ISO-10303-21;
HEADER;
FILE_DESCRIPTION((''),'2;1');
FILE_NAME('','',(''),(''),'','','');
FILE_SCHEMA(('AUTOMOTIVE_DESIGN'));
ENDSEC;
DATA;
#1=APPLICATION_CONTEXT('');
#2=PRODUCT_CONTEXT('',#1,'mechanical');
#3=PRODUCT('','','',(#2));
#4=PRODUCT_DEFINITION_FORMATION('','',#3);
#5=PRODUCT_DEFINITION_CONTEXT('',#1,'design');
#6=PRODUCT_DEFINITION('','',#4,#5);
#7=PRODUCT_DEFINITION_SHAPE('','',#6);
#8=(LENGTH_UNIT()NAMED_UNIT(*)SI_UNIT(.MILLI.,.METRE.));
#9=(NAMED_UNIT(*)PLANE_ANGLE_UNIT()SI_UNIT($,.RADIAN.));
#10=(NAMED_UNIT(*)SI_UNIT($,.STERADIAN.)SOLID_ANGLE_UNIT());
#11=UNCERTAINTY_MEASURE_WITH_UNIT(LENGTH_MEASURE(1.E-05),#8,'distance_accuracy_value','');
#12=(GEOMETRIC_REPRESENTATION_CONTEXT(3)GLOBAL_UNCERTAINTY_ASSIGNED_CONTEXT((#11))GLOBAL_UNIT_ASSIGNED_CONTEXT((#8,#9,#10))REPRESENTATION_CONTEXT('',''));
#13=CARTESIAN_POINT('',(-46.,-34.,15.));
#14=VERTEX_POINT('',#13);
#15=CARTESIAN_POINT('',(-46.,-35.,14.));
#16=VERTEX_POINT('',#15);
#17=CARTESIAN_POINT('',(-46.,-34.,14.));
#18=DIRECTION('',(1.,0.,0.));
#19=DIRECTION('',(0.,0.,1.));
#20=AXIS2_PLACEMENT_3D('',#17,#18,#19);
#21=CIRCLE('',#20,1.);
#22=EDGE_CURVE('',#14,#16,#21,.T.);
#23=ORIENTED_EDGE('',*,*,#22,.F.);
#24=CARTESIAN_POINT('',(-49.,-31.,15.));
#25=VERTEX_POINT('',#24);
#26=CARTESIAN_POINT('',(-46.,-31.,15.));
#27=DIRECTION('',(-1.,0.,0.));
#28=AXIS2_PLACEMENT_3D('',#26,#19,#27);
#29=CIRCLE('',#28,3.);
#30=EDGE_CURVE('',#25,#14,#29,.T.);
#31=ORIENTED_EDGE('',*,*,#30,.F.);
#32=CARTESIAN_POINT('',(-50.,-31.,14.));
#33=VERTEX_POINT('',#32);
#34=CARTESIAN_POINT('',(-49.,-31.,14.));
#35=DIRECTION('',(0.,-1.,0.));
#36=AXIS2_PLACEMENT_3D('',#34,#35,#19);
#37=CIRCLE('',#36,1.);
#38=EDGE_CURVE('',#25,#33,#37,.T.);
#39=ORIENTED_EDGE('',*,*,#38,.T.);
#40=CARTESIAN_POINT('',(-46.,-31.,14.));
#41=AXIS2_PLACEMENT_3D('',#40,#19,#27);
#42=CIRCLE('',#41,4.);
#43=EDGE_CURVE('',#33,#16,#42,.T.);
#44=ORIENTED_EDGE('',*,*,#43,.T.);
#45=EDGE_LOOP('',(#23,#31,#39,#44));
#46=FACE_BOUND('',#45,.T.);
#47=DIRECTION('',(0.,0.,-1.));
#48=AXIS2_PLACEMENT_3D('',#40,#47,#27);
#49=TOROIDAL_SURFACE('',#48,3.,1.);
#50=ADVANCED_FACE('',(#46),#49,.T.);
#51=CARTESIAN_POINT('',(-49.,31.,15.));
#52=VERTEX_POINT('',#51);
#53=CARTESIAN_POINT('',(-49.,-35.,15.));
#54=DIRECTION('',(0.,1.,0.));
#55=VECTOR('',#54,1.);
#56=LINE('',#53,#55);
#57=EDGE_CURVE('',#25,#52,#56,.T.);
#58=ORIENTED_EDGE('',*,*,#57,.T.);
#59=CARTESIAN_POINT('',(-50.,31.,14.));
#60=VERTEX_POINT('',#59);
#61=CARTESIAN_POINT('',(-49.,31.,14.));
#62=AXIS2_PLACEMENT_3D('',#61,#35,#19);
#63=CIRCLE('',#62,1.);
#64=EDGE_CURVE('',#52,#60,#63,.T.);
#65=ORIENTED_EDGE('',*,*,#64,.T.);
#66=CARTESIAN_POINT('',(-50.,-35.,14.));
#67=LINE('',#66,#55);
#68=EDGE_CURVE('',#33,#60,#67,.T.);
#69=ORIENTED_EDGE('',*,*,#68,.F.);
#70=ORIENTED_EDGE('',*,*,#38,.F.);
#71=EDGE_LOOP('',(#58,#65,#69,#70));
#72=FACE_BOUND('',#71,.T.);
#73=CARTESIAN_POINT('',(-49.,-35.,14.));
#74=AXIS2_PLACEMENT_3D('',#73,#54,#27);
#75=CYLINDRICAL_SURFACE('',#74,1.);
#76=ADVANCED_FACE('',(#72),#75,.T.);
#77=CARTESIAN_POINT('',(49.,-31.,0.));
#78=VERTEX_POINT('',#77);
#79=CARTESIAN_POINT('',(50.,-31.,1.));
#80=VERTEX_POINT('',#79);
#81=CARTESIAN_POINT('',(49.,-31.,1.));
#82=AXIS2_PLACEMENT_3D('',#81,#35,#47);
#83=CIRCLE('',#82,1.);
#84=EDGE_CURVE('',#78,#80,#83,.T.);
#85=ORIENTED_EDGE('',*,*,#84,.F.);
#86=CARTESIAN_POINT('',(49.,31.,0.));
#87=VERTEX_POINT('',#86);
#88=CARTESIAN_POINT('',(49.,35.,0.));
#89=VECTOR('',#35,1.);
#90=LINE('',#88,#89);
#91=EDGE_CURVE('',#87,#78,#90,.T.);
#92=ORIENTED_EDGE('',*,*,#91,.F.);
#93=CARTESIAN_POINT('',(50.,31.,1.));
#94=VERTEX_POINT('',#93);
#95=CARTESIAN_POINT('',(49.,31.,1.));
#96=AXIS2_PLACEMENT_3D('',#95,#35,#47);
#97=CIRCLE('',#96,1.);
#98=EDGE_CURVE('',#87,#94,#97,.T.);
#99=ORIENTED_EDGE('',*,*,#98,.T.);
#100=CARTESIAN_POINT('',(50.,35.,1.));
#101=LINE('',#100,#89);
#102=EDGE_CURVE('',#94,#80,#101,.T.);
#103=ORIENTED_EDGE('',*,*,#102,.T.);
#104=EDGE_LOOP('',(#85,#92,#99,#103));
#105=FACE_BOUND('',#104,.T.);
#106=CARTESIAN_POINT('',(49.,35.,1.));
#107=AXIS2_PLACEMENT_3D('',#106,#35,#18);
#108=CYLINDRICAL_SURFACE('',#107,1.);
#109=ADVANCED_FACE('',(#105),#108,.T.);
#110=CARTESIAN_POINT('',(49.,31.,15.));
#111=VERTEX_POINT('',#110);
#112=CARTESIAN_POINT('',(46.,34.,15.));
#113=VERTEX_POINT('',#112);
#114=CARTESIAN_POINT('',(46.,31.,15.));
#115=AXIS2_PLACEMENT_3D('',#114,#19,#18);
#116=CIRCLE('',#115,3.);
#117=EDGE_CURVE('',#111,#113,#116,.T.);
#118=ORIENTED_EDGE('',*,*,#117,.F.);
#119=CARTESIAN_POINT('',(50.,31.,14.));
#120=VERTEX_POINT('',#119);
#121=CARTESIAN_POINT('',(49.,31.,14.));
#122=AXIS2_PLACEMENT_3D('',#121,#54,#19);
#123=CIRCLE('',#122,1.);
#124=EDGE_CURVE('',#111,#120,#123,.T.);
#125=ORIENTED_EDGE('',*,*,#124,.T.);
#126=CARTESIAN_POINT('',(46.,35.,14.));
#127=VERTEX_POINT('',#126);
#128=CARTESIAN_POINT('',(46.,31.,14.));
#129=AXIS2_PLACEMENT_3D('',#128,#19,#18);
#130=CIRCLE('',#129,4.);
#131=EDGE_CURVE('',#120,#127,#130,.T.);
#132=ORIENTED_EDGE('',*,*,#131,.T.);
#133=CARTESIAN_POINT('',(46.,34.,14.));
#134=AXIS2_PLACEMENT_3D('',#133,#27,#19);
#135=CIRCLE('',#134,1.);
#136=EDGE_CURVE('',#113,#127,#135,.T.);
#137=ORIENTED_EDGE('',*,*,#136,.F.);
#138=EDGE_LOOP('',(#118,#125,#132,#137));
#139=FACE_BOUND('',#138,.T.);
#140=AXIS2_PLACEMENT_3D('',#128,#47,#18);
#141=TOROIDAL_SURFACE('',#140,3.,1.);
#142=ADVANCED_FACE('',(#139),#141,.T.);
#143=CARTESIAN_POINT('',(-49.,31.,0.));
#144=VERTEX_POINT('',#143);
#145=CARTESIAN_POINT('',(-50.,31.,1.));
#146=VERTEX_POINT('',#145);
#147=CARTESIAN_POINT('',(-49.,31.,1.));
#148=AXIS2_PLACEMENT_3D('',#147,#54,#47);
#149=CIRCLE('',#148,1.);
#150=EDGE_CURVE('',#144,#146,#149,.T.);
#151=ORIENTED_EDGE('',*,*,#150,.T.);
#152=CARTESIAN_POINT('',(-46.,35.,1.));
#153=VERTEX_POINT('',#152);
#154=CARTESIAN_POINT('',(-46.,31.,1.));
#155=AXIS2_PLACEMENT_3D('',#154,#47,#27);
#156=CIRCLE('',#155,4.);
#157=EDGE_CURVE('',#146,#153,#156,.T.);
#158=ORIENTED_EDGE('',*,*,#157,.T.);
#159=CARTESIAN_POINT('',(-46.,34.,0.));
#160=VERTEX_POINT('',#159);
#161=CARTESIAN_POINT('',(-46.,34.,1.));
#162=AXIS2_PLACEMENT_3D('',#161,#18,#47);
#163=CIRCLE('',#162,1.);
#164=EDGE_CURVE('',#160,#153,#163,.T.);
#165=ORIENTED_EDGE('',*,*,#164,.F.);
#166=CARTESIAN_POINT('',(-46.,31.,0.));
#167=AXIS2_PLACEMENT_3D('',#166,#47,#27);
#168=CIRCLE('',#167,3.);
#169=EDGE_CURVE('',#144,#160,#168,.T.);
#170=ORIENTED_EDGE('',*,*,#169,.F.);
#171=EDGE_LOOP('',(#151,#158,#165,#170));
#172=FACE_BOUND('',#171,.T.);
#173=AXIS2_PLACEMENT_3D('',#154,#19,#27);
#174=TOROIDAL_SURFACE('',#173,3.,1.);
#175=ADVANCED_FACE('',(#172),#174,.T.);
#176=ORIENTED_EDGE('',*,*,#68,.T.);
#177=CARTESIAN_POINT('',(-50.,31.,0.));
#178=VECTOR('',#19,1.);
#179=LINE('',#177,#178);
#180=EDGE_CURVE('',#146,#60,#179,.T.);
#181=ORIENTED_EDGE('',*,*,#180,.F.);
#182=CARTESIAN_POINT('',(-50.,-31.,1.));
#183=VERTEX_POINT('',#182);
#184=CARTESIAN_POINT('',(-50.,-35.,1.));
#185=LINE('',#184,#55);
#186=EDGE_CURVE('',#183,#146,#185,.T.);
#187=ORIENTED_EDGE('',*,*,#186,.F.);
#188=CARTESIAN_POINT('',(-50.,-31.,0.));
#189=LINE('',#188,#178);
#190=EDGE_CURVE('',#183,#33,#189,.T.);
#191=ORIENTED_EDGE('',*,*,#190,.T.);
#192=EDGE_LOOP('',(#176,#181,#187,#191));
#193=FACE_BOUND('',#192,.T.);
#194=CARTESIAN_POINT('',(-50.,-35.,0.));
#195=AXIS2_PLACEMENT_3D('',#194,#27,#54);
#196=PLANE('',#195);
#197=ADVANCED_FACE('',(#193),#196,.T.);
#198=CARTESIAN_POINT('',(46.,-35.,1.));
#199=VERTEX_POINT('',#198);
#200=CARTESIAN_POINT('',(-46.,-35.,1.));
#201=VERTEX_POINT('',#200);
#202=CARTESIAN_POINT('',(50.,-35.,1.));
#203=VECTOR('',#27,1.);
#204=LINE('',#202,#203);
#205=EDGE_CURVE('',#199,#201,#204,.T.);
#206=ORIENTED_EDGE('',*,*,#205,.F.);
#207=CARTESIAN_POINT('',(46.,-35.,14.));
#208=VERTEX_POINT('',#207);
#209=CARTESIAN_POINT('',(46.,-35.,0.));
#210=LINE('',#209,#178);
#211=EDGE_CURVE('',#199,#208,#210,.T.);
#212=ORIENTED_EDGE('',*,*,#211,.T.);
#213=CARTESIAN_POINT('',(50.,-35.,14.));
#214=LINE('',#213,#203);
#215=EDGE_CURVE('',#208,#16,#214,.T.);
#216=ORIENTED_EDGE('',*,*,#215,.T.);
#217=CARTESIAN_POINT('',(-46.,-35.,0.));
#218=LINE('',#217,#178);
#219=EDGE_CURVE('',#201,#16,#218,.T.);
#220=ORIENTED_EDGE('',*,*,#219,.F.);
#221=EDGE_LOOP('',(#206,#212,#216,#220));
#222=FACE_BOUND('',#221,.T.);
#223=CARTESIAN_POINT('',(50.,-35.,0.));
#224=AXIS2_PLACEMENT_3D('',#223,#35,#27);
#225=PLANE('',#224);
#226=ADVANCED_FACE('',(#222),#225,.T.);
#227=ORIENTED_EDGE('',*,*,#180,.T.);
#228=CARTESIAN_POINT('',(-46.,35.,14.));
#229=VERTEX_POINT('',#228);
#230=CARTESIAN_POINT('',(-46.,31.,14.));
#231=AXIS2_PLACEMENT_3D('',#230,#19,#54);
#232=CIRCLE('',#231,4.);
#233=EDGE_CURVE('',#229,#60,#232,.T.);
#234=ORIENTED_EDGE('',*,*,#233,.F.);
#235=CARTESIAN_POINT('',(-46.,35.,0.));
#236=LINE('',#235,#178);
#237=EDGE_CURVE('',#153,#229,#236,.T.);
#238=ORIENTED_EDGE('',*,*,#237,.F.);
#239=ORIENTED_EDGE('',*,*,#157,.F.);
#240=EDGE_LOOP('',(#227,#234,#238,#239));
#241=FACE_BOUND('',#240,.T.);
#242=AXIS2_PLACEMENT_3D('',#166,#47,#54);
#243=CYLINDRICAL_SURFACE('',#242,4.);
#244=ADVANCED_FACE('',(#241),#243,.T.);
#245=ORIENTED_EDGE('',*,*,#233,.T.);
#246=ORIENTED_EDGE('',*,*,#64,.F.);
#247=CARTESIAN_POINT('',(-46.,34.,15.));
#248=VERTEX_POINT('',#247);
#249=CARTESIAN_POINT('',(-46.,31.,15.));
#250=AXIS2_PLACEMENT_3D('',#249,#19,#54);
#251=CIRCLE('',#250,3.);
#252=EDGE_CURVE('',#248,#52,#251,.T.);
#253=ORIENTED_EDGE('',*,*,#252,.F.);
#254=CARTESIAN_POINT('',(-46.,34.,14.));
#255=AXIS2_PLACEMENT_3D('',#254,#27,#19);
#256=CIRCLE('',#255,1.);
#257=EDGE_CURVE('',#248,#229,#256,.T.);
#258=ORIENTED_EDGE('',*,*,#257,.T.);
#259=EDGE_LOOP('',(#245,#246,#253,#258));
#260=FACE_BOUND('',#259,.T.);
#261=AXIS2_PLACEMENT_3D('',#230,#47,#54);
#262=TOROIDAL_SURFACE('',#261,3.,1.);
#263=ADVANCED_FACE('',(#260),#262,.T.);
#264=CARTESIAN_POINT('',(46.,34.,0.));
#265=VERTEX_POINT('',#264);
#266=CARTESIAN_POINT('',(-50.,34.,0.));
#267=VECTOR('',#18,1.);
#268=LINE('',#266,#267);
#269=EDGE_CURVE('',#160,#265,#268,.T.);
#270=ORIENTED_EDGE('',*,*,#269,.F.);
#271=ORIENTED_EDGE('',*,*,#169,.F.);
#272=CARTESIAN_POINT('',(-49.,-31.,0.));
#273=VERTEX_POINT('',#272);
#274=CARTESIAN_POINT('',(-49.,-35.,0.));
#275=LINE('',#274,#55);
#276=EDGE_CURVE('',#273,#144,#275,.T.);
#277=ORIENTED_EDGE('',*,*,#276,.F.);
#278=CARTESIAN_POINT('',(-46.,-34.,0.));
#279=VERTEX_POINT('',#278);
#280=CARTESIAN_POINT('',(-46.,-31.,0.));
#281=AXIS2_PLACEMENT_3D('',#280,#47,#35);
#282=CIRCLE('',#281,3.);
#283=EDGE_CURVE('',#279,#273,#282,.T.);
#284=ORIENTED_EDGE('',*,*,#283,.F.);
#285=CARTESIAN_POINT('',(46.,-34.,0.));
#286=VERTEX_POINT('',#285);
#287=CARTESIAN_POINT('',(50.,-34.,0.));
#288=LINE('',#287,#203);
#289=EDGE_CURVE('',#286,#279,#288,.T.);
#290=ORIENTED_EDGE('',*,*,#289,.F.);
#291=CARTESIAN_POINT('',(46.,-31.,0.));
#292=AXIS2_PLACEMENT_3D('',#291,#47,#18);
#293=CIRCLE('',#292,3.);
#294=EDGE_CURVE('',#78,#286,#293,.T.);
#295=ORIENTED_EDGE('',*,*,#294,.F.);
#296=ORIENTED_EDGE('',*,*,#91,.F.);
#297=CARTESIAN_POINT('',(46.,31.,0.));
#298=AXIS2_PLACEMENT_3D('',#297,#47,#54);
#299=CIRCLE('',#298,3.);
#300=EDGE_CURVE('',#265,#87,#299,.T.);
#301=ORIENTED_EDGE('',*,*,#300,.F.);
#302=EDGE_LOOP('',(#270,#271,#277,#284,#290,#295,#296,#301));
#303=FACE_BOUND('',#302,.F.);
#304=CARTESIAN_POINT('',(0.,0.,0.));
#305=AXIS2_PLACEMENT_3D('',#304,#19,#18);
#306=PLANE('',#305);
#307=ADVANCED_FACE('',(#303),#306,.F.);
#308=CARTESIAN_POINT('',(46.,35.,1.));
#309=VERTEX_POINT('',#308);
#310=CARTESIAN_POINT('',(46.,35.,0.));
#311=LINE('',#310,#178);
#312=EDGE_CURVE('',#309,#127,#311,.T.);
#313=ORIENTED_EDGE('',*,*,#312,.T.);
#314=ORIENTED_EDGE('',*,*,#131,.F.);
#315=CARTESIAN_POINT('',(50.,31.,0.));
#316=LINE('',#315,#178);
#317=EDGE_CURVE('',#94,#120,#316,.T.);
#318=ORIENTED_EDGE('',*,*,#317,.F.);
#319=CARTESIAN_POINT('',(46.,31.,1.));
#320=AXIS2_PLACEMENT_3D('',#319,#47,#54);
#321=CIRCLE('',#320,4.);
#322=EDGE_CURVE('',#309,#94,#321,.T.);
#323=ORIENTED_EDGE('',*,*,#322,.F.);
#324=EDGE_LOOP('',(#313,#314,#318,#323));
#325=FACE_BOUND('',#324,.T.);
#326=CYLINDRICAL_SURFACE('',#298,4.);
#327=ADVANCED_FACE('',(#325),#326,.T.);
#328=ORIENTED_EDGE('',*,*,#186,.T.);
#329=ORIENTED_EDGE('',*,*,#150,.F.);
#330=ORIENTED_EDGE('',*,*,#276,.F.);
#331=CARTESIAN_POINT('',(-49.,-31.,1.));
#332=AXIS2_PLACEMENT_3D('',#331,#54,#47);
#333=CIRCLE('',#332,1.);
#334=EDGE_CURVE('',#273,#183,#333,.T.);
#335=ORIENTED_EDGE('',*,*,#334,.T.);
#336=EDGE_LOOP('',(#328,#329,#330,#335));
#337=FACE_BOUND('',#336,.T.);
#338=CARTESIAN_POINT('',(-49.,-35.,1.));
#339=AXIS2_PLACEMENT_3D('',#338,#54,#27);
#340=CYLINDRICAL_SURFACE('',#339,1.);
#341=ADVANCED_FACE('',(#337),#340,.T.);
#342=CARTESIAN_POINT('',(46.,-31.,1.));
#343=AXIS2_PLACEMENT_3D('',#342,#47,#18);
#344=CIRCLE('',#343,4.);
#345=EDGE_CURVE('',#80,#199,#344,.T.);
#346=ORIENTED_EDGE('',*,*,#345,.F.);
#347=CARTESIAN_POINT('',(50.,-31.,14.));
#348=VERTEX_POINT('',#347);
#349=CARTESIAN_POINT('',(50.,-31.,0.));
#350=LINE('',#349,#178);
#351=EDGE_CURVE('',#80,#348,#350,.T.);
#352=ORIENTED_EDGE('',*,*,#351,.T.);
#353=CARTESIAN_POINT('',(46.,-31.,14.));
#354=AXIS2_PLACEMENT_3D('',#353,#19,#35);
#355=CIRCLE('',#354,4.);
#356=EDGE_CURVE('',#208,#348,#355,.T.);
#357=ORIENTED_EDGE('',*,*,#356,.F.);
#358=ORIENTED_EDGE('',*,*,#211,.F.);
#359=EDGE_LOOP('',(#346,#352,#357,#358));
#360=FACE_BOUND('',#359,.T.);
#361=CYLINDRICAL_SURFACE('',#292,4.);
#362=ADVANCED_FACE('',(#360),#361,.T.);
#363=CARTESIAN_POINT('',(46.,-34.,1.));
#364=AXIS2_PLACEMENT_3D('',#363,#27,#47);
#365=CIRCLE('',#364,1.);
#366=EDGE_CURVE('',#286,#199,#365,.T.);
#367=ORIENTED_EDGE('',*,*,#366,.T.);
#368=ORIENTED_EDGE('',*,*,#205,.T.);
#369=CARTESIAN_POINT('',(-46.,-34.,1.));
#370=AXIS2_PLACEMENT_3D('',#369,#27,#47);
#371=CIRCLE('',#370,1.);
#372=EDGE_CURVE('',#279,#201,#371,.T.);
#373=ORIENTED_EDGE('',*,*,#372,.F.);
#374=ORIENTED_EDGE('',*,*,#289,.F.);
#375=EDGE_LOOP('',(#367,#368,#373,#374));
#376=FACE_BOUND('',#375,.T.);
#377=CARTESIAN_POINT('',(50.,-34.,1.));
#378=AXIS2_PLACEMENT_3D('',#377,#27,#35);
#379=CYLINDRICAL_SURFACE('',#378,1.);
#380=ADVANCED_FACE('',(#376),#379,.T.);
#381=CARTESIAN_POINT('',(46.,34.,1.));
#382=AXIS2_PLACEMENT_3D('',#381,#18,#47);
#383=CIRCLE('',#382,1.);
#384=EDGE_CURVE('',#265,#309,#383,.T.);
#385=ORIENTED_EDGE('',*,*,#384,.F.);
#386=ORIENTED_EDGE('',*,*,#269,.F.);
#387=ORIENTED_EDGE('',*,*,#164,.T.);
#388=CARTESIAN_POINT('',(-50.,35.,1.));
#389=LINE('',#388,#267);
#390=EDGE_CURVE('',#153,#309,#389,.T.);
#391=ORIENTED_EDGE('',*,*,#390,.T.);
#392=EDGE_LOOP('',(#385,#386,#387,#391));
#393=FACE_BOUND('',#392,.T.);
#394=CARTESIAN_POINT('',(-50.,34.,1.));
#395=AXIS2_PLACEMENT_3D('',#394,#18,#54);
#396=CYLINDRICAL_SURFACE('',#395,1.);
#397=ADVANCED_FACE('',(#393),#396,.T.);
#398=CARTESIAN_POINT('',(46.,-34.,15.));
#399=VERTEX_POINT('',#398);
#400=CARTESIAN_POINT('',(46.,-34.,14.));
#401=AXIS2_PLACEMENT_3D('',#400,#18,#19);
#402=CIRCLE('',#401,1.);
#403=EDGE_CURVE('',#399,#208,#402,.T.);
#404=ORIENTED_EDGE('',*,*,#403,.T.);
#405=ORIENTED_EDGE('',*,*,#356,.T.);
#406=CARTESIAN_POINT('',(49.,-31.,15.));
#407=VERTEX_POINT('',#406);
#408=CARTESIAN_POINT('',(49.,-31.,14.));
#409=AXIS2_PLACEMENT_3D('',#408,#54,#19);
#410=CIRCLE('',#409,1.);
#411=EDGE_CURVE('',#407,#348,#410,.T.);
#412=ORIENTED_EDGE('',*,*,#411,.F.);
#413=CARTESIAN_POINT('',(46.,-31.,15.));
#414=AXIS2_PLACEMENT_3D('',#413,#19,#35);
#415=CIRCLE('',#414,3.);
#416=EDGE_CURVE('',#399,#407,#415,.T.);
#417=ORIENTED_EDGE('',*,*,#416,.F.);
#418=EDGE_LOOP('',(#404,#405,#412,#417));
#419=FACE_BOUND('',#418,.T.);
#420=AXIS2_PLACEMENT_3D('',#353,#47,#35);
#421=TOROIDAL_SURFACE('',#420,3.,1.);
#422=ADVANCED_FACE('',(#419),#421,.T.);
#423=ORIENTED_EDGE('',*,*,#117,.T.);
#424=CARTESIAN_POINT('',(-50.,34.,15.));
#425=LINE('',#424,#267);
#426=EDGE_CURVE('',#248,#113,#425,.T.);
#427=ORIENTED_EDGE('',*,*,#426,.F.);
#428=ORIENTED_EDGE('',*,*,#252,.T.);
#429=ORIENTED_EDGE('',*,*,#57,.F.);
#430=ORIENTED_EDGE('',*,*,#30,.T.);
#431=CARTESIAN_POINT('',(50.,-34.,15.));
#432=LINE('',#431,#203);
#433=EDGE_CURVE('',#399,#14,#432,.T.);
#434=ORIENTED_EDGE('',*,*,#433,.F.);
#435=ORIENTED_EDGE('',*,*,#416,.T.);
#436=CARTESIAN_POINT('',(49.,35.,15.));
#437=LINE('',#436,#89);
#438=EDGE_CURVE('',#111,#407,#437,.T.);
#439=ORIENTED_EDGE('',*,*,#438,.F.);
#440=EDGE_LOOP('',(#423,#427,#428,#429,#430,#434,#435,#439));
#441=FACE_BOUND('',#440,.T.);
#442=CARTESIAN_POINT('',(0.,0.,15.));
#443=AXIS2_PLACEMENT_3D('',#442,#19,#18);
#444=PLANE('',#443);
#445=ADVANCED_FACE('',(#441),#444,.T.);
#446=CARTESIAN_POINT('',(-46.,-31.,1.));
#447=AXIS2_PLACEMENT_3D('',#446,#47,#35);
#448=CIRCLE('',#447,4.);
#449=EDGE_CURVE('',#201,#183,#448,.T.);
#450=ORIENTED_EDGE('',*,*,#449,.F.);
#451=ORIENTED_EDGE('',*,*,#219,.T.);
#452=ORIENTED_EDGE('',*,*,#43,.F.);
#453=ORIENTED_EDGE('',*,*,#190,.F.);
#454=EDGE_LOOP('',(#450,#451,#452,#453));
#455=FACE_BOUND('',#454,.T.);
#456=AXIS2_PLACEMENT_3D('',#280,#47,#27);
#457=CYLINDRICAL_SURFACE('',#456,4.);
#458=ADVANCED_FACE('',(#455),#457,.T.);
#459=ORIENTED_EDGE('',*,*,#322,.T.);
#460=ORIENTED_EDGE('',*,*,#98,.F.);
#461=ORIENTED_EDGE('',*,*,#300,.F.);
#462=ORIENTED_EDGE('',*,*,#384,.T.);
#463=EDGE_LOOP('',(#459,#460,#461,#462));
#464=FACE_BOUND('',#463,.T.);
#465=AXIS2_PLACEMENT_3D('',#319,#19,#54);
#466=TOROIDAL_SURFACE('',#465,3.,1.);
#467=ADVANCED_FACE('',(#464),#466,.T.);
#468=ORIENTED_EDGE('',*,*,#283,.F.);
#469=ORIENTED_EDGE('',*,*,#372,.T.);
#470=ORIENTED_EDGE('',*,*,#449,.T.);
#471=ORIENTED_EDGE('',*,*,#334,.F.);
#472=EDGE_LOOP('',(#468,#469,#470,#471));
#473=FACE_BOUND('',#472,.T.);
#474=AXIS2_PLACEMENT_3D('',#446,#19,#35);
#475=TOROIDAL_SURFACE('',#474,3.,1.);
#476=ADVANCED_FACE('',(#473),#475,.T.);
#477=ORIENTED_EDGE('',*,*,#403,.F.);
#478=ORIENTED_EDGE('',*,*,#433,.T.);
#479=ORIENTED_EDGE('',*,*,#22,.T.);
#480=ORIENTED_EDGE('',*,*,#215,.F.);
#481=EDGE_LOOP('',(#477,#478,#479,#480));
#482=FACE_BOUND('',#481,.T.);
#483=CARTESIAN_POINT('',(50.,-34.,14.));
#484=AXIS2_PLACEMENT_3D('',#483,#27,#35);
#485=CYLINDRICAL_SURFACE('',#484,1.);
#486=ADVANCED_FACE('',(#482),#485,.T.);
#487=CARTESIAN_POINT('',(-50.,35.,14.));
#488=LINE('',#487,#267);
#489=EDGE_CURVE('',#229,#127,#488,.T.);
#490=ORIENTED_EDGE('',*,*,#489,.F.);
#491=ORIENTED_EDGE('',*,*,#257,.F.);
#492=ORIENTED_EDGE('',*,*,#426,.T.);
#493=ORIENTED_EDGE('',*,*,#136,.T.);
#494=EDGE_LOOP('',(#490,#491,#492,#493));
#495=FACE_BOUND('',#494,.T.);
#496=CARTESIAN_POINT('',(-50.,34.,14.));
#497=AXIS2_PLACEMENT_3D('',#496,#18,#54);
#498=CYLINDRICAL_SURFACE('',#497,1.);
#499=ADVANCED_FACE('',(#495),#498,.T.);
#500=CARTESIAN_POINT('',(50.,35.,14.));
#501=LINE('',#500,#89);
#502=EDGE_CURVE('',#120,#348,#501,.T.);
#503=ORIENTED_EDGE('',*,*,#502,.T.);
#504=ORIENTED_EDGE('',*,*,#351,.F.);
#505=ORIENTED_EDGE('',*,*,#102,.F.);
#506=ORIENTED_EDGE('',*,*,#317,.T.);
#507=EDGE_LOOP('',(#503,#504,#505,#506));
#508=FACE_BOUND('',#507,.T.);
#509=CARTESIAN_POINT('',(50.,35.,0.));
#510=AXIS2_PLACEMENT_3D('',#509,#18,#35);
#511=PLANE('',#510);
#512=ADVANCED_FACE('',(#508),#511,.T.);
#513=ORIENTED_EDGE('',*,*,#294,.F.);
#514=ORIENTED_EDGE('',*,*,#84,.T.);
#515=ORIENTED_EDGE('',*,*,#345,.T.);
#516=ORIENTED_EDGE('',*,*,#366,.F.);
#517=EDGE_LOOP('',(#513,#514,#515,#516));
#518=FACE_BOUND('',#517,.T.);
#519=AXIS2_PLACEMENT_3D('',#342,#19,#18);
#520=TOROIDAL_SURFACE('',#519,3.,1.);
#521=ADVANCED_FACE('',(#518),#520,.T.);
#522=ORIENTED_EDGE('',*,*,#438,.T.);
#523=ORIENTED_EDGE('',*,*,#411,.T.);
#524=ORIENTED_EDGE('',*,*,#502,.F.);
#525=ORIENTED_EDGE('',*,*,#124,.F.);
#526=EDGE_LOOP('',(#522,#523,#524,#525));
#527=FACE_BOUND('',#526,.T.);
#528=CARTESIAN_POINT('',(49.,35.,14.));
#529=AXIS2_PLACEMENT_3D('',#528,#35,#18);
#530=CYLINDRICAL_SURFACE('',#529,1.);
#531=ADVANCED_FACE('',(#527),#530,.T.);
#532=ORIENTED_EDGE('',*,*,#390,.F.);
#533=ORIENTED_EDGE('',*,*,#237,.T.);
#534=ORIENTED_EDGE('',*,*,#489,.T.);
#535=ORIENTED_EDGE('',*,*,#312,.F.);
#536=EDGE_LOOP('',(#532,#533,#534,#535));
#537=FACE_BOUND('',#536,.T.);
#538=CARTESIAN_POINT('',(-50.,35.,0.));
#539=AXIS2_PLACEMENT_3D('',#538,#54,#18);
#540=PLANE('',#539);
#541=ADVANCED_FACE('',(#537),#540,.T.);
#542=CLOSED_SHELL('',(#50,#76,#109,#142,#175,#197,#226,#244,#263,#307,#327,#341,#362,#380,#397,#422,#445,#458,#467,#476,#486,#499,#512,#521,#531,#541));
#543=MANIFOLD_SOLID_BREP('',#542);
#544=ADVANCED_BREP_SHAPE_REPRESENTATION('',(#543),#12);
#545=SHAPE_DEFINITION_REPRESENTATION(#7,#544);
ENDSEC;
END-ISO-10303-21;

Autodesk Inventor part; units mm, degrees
ref_plane "YZ Plane" through (0, 0, 0) normal (1, 0, 0) x (0, 1, 0)
ref_plane "XZ Plane" through (0, 0, 0) normal (0, 1, 0) x (-1, 0, 0)
ref_plane "XY Plane" through (0, 0, 0) normal (0, 0, 1) x (1, 0, 0)
sketch "Sketch1" plane through (0, 0, 0) normal (0, 0, 1) x (1, 0, 0)
  line L0 (-50, 35) -> (50, 35)
  line L1 (50, 35) -> (50, -35)
  line L2 (50, -35) -> (-50, -35)
  line L3 (-50, -35) -> (-50, 35)
  point P0 (0, 0)
  dimension "d0" = 100
  dimension "d1" = 70
  dimension "d2" = 35
  dimension "d3" = 50
extrude "Extrusion1" add sketch "Sketch1" along normal blind 15
fillet "Fillet1" radius 1 8 edges at (50, 0, 15) (0, 35, 15) (0, 35, 0) (50, 0, 0) (-50, 0, 15) (0, -35, 15) (-50, 0, 0) (0, -35, 0)
fillet "Fillet2" radius 4 12 edges at (-49.7071, -34.7071, 14.7071) (-49.7071, -34.7071, 0.2929) (-50, -35, 7.5) (-50, 35, 7.5) (-49.7071, 34.7071, 14.7071) (-49.7071, 34.7071, 0.2929) (50, -35, 7.5) (49.7071, -34.7071, 14.7071) (49.7071, -34.7071, 0.2929) (50, 35, 7.5) (49.7071, 34.7071, 14.7071) (49.7071, 34.7071, 0.2929)
properties part number "SSD2.5"
